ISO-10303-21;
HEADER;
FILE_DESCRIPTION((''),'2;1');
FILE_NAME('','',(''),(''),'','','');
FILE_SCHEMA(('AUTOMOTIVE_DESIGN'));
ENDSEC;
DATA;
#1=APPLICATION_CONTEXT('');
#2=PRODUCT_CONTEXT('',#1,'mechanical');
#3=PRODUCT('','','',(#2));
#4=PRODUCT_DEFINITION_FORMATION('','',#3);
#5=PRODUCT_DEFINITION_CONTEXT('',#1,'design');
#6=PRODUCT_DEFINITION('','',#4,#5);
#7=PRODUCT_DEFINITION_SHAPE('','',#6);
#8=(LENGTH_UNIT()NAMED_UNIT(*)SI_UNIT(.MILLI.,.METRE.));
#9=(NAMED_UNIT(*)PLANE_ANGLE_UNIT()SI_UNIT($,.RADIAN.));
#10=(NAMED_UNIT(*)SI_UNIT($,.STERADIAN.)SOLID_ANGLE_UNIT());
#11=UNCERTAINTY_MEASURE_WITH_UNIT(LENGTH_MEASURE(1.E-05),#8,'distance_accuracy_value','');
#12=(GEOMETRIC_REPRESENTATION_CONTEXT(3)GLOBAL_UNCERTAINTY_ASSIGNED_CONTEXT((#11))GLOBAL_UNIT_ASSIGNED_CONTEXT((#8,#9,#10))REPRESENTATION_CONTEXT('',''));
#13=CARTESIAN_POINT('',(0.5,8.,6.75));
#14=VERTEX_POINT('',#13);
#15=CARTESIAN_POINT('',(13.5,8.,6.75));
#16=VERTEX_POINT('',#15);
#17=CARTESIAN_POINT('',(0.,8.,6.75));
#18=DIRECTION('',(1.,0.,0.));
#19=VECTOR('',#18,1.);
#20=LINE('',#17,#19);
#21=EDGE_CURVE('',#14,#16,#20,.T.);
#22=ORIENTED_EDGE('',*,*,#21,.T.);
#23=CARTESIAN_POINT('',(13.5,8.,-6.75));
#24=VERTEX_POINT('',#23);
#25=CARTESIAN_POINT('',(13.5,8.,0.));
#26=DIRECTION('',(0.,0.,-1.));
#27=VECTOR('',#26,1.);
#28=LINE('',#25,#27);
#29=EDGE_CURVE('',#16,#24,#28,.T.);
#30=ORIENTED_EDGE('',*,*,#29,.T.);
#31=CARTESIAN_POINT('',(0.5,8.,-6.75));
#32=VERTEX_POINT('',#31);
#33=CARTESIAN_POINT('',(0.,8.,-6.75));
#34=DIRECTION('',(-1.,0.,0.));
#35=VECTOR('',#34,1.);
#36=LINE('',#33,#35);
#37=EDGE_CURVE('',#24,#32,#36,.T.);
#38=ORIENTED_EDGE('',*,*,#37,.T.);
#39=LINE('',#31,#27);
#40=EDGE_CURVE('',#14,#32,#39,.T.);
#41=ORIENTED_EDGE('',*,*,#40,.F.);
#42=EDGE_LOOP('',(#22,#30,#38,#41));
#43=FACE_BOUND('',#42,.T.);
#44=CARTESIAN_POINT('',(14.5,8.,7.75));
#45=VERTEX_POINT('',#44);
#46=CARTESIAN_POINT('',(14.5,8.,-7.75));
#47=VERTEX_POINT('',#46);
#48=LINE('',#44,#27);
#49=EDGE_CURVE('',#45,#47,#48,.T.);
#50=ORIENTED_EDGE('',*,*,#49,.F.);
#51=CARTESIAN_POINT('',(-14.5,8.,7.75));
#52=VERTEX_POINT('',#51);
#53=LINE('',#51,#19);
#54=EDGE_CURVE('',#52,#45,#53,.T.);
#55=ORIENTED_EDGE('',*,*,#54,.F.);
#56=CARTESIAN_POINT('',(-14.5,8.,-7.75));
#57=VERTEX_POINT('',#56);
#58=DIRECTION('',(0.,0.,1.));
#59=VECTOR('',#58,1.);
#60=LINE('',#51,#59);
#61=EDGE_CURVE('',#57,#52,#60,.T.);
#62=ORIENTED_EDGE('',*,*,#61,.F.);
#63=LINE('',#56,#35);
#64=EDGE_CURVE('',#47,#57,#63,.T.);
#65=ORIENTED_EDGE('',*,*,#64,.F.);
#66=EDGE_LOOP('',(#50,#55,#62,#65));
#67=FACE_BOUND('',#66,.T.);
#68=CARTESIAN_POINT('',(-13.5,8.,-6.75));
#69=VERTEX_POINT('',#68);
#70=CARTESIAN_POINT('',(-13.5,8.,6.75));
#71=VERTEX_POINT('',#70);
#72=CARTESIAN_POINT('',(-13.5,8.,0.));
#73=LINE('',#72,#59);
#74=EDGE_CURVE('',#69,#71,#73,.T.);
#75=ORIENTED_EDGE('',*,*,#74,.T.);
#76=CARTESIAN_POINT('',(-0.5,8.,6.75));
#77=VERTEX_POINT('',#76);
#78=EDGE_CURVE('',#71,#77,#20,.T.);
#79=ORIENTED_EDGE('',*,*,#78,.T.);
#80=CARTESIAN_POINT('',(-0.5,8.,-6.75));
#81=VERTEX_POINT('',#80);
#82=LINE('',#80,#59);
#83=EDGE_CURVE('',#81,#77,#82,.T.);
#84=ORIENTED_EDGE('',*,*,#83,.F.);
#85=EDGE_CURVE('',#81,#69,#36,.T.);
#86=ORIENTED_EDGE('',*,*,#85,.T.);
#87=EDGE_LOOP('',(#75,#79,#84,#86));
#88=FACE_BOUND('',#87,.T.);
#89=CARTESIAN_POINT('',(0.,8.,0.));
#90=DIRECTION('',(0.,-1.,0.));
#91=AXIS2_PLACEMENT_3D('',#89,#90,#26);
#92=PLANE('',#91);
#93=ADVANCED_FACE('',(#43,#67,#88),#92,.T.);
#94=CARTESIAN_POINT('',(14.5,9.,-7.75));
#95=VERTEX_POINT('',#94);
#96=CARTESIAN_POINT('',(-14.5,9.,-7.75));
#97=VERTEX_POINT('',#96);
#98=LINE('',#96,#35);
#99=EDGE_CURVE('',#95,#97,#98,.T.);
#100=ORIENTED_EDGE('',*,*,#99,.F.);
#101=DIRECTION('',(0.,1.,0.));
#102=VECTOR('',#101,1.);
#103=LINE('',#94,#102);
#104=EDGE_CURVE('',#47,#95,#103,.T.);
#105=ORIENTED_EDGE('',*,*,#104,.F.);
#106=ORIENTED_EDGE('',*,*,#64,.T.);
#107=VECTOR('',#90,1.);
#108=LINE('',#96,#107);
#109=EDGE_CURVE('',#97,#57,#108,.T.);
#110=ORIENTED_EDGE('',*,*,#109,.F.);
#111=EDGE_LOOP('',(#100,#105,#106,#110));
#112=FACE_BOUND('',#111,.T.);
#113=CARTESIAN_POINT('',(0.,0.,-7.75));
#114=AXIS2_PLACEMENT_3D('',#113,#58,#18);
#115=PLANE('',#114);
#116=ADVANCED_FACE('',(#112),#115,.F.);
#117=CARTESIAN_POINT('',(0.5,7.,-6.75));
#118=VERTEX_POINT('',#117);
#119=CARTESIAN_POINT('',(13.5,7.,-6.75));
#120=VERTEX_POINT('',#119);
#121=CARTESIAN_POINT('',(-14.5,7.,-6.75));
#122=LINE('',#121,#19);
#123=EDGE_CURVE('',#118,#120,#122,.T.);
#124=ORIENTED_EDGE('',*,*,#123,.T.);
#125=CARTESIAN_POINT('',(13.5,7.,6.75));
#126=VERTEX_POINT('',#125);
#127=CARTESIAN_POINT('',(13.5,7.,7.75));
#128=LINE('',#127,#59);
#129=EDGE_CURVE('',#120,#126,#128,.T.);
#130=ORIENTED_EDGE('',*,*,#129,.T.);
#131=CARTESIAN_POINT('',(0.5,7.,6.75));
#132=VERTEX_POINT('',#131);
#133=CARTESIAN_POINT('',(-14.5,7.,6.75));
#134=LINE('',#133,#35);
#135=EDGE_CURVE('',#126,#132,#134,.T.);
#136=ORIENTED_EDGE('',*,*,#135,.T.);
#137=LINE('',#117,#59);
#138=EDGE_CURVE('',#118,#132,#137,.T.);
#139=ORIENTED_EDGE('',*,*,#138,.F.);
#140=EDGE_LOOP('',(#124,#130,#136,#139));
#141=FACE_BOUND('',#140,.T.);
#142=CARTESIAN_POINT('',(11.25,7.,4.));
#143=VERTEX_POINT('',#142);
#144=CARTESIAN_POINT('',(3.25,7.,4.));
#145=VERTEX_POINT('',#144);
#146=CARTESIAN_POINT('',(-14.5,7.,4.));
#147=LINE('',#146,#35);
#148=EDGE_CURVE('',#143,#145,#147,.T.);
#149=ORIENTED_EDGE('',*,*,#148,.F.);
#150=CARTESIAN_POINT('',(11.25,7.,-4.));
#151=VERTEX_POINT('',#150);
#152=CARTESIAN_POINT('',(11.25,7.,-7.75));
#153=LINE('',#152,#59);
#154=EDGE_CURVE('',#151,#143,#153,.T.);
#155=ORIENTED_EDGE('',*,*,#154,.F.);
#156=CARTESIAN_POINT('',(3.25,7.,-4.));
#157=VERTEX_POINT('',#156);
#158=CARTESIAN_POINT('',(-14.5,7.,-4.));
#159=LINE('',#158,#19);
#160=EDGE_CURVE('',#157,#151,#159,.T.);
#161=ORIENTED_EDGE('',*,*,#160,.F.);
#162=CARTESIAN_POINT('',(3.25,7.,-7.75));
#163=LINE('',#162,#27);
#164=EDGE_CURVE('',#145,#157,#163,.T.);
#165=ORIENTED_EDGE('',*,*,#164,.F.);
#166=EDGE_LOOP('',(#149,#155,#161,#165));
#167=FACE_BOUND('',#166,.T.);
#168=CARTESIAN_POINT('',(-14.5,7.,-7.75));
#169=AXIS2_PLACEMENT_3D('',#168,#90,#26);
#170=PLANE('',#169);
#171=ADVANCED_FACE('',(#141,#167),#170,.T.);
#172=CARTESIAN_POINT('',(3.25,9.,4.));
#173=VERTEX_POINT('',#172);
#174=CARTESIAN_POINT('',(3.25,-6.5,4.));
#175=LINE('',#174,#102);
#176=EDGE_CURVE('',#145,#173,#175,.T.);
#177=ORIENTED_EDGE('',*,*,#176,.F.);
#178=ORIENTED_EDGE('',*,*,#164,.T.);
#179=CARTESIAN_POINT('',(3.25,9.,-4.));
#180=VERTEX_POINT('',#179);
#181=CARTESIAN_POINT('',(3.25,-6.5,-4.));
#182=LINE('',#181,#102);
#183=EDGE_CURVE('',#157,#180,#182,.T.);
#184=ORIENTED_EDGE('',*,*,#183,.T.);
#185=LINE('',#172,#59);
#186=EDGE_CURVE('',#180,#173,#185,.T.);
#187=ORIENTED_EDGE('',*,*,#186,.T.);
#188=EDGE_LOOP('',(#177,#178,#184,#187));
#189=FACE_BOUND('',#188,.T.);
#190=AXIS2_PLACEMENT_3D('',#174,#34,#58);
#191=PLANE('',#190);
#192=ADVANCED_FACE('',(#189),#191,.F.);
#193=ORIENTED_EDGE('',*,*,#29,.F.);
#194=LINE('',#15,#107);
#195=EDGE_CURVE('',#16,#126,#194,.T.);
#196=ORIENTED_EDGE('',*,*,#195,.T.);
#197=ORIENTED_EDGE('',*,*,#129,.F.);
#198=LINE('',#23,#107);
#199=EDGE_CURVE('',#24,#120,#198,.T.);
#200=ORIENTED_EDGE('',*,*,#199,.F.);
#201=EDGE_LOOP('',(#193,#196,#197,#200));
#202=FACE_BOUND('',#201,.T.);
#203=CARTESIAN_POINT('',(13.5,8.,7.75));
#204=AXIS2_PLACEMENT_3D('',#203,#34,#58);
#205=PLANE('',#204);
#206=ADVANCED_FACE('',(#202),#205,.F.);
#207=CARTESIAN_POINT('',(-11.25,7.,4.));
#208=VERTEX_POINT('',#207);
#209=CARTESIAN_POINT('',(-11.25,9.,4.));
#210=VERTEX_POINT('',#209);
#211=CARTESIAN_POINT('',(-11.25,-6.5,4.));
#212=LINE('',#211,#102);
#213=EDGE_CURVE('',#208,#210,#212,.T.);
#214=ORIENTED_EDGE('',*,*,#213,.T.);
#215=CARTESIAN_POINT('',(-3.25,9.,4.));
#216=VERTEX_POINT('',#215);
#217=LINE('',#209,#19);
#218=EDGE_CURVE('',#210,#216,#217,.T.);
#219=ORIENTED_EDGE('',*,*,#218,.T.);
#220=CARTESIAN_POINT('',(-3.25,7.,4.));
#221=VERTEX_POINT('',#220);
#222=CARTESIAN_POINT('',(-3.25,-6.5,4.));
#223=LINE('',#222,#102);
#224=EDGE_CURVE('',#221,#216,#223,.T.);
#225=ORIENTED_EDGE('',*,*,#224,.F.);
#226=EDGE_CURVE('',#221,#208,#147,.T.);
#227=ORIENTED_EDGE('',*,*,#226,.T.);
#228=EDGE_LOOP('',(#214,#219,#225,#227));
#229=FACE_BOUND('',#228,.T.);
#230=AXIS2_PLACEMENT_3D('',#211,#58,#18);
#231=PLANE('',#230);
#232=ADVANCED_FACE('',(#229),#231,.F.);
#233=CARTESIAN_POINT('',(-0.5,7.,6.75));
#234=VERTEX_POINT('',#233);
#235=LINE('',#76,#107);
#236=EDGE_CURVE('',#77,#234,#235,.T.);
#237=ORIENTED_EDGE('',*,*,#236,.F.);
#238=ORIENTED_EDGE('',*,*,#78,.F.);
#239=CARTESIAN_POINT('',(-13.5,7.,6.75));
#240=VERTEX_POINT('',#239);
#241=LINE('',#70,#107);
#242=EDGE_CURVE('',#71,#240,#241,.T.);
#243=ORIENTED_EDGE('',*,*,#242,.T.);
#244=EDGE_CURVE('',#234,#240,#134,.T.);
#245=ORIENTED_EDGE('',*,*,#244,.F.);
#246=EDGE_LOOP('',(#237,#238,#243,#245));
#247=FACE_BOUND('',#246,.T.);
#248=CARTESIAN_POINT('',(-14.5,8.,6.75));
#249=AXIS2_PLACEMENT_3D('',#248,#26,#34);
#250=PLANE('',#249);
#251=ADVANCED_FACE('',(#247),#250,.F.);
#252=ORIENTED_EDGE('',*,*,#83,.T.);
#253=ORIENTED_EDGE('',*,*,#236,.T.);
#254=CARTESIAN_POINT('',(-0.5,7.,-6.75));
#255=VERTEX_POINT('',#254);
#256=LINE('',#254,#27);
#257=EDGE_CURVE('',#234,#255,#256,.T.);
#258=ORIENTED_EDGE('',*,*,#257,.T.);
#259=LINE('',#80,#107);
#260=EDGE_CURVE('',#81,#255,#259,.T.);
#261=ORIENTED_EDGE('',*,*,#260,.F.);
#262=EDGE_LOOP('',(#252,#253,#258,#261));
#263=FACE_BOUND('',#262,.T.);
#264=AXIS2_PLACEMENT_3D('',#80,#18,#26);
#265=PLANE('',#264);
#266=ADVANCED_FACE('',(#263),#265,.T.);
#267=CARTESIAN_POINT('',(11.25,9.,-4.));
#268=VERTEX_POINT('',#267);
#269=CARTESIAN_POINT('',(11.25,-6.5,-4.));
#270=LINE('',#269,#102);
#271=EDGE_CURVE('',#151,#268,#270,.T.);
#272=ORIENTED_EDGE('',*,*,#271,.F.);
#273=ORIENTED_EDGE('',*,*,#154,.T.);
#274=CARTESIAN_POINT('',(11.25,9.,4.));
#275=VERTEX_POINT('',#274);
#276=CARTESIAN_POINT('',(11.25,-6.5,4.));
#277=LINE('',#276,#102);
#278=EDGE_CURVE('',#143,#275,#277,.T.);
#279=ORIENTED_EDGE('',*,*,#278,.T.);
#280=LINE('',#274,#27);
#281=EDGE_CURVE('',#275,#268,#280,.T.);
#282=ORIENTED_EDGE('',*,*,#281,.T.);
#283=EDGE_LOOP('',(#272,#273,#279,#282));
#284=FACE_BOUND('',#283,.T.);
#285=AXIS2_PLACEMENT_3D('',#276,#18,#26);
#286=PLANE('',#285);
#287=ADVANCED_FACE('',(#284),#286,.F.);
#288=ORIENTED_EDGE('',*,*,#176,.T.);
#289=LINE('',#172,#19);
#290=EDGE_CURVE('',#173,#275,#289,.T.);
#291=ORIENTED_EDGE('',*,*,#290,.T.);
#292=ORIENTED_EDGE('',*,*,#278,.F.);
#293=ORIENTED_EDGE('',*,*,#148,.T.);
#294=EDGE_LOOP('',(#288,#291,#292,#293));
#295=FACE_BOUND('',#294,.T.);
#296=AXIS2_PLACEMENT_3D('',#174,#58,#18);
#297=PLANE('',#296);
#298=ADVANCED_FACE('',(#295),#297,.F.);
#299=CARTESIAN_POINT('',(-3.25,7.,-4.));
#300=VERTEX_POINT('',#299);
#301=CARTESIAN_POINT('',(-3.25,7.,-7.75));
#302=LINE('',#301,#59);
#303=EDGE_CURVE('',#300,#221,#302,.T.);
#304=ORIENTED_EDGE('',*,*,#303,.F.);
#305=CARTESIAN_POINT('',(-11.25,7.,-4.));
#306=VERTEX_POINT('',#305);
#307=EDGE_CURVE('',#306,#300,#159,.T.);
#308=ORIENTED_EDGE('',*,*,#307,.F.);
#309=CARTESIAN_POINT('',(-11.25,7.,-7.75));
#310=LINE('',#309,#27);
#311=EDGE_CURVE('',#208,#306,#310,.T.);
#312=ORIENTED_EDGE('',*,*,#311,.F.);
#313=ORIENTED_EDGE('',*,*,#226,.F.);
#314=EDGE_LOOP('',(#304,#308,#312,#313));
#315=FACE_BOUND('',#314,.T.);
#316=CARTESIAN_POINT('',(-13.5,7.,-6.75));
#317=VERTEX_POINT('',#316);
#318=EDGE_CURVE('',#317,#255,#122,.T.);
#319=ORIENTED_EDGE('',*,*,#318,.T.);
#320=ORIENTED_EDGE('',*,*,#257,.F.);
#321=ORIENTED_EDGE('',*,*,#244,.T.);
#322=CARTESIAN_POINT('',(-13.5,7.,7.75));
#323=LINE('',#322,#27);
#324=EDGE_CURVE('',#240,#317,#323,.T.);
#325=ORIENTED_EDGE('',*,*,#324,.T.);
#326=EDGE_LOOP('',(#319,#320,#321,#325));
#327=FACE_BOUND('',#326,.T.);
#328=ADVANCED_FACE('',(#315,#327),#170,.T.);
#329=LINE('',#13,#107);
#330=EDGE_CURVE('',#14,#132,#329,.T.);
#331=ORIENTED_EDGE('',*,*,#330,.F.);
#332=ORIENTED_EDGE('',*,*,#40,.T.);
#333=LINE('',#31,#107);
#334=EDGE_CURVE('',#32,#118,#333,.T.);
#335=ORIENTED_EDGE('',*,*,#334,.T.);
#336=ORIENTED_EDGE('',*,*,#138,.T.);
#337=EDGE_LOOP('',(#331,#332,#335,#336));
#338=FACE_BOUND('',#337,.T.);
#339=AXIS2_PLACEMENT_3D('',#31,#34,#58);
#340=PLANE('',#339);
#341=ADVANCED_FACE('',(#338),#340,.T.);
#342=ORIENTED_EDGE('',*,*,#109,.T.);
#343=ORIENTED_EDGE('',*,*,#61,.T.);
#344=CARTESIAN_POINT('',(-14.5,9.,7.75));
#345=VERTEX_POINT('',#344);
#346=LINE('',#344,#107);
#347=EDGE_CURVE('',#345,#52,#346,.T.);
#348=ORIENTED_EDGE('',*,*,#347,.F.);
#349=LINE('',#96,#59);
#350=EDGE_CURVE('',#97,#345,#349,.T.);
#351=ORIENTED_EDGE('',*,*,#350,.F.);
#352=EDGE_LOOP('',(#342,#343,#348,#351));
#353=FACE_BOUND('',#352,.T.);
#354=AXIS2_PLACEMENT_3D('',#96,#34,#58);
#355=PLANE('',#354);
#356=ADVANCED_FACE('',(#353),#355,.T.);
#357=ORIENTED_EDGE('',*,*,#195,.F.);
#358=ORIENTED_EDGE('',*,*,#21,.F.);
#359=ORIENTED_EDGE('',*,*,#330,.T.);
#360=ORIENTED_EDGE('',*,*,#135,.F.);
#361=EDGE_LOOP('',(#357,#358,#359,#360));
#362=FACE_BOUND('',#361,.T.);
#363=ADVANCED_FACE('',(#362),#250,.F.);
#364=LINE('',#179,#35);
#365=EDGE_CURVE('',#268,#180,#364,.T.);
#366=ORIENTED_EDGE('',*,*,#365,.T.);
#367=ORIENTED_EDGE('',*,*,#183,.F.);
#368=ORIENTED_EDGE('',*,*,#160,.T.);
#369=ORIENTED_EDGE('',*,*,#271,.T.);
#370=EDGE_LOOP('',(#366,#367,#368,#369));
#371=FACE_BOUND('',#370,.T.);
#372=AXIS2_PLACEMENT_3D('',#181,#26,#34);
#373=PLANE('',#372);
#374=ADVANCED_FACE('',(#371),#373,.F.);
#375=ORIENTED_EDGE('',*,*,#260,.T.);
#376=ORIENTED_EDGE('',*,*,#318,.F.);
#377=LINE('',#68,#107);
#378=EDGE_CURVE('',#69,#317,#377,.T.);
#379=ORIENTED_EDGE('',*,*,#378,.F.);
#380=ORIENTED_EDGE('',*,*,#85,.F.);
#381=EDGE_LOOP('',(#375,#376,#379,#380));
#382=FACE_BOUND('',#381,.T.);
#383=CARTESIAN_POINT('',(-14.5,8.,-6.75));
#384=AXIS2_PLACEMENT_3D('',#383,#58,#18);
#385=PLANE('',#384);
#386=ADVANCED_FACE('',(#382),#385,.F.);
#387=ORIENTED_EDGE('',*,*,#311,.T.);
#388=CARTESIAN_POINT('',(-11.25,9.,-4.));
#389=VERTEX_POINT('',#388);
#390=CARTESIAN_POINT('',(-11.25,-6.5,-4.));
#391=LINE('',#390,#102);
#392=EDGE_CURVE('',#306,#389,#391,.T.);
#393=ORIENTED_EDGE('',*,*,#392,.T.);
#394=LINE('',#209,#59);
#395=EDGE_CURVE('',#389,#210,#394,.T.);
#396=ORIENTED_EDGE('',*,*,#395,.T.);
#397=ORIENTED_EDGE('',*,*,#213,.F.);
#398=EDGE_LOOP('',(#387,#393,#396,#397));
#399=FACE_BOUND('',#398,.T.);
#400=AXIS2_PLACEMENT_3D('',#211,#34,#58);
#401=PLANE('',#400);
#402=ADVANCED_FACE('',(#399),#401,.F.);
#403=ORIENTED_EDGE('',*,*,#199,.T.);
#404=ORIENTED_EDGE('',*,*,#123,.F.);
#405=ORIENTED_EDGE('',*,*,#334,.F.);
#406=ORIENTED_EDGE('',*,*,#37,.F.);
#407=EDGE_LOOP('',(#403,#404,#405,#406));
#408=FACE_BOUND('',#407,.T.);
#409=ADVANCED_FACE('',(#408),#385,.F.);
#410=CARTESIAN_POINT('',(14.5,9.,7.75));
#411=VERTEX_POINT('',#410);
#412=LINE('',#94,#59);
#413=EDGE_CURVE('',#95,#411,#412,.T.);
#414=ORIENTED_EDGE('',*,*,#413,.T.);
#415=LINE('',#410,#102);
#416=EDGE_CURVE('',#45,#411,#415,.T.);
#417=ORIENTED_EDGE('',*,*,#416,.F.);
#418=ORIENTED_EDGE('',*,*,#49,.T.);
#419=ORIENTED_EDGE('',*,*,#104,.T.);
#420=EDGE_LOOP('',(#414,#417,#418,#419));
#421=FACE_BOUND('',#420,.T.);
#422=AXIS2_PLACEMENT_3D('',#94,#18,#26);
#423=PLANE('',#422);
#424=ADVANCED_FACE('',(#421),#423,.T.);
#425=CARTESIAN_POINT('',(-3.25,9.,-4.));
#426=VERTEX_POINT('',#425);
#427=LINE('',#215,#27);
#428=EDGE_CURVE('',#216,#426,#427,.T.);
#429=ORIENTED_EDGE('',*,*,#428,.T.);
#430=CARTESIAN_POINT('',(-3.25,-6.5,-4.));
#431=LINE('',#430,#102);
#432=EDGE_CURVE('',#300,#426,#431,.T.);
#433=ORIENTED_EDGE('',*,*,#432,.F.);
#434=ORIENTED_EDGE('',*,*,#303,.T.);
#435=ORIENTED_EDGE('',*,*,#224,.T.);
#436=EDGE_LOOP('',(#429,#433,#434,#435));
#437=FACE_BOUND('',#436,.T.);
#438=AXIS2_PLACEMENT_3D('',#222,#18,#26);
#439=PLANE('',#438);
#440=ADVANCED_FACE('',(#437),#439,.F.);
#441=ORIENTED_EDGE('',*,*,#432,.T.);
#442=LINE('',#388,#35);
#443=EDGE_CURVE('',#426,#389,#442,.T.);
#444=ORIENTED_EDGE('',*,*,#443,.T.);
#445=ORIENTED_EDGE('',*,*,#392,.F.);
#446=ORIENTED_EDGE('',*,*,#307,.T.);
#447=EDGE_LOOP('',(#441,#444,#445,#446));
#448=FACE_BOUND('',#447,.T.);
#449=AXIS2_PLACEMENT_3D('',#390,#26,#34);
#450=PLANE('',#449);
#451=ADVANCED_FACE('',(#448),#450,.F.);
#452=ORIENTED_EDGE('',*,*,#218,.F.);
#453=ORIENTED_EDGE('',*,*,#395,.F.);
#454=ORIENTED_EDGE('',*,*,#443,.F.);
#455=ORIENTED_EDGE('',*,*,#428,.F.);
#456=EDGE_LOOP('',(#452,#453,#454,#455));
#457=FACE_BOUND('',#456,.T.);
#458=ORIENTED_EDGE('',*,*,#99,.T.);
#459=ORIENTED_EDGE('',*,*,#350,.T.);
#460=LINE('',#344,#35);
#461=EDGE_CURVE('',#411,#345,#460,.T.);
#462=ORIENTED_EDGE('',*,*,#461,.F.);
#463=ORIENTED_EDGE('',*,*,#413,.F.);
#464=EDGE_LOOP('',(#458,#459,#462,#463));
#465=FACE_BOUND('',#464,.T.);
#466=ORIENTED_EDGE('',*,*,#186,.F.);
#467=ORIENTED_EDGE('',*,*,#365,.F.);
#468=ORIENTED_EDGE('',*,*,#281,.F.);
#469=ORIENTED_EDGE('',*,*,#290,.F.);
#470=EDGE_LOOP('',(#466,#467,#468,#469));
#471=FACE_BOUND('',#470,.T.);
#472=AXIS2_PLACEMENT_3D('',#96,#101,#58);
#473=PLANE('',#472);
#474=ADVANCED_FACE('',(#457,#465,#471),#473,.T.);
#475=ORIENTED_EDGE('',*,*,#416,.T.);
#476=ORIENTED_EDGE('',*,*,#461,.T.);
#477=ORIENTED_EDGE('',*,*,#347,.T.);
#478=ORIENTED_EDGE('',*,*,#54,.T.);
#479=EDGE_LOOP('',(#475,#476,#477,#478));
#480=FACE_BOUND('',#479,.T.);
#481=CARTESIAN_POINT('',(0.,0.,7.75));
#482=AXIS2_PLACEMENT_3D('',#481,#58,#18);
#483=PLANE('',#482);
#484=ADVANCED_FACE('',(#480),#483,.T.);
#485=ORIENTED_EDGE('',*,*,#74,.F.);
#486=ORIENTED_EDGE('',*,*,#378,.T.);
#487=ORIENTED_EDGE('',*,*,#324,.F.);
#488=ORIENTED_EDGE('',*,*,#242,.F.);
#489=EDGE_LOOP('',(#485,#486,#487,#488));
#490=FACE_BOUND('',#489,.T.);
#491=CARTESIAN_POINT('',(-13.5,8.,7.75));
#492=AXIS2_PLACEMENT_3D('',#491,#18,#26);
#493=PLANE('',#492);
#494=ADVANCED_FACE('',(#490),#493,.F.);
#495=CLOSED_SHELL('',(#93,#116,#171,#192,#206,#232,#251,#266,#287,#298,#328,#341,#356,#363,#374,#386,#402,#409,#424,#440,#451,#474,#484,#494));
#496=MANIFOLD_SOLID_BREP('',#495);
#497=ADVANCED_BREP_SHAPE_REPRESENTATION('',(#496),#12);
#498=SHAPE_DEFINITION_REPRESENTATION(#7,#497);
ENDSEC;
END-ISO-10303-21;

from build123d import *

# Parameters (mm, degrees)
SKETCH1_W                = 29
SKETCH1_H                = 15.5
BOSS_EXTRUDE1_DEPTH      = 8
SHELL1_T                 = -1
SKETCH2_W                = 1
SKETCH2_H                = 13.5
BOSS_EXTRUDE2_DEPTH      = 7
SKETCH3_W                = 8
SKETCH3_H                = 3
CUT_EXTRUDE1_DEPTH       = 7
SKETCH4_W                = 29
SKETCH4_H                = 2
BOSS_EXTRUDE3_DEPTH      = 15.5
INTERSECT1_OUTLINE_W     = 29
INTERSECT1_OUTLINE_H     = 15.5
INTERSECT1_OUTLINE_W_2   = 8
INTERSECT1_OUTLINE_H_2   = 3
INTERSECT1_DEPTH         = 7
INTERSECT1_START         = 7
INTERSECT1_2_OUTLINE_W   = 29
INTERSECT1_2_OUTLINE_H   = 15.5
INTERSECT1_2_OUTLINE_W_2 = 13
INTERSECT1_2_OUTLINE_H_2 = 13.5
INTERSECT1_2_DEPTH       = 1
SKETCH5_W                = 8
SKETCH5_H                = 8
CUT_EXTRUDE2_DEPTH       = 15.5


# Read off the part's stored shape, not the designer's step: Intersect1
with BuildPart() as part:
    # Sketch1 → Boss-Extrude1 (new body)
    with BuildSketch(Plane(origin=(0, 0, 0), x_dir=(1, 0, 0), z_dir=(0, 1, 0))):
        Rectangle(SKETCH1_W, SKETCH1_H)
    extrude(amount=BOSS_EXTRUDE1_DEPTH)

    # Shell1
    shell1_openings = [part.faces().sort_by_distance(p)[0] for p in [
        (0, 8, 0),
    ]]
    offset(amount=SHELL1_T, openings=shell1_openings, kind=Kind.INTERSECTION)

    # Sketch2 → Boss-Extrude2 (add)
    with BuildSketch(Plane(origin=(0, 1, 0), x_dir=(1, 0, 0), z_dir=(0, 1, 0))):
        Rectangle(SKETCH2_W, SKETCH2_H)
    extrude(amount=BOSS_EXTRUDE2_DEPTH)

    # Sketch3 → Cut-Extrude1 (cut)
    with BuildSketch(Plane(origin=(0, 1, 0), x_dir=(1, 0, 0), z_dir=(0, 1, 0))):
        with Locations((-7.25, 5.25)):
            Rectangle(SKETCH3_W, SKETCH3_H)
        with Locations((7.25, 5.25)):
            Rectangle(SKETCH3_W, SKETCH3_H)
        with Locations((7.25, -5.25)):
            Rectangle(SKETCH3_W, SKETCH3_H)
        with Locations((-7.25, -5.25)):
            Rectangle(SKETCH3_W, SKETCH3_H)
    extrude(amount=-CUT_EXTRUDE1_DEPTH, mode=Mode.SUBTRACT)

    # Intersect1 outline → Intersect1 (cut)
    with BuildSketch(Plane(origin=(0, 0, 0), x_dir=(1, 0, 0), z_dir=(0, 1, 0))):
        Rectangle(INTERSECT1_OUTLINE_W, INTERSECT1_OUTLINE_H)
        with Locations((-7.25, -5.25)):
            Rectangle(INTERSECT1_OUTLINE_W_2, INTERSECT1_OUTLINE_H_2, mode=Mode.SUBTRACT)
        with Locations((-7.25, 5.25)):
            Rectangle(INTERSECT1_OUTLINE_W_2, INTERSECT1_OUTLINE_H_2, mode=Mode.SUBTRACT)
        with Locations((7.25, 5.25)):
            Rectangle(INTERSECT1_OUTLINE_W_2, INTERSECT1_OUTLINE_H_2, mode=Mode.SUBTRACT)
        with Locations((7.25, -5.25)):
            Rectangle(INTERSECT1_OUTLINE_W_2, INTERSECT1_OUTLINE_H_2, mode=Mode.SUBTRACT)
    extrude(amount=INTERSECT1_DEPTH, mode=Mode.SUBTRACT)


with BuildPart() as body_2:
    # Sketch4 → Boss-Extrude3 (new body)
    with BuildSketch(Plane.XY.offset(7.75)):
        with Locations((0, 8)):
            Rectangle(SKETCH4_W, SKETCH4_H)
    extrude(amount=-BOSS_EXTRUDE3_DEPTH)


with BuildPart() as intersect1_2_tool:
    # Intersect1 2 outline → Intersect1 2 (new body)
    with BuildSketch(Plane(origin=(0, 0, 0), x_dir=(1, 0, 0), z_dir=(0, 1, 0)).offset(INTERSECT1_START)):
        Rectangle(INTERSECT1_2_OUTLINE_W, INTERSECT1_2_OUTLINE_H)
        with Locations((-7, 0)):
            Rectangle(INTERSECT1_2_OUTLINE_W_2, INTERSECT1_2_OUTLINE_H_2, mode=Mode.SUBTRACT)
        with Locations((7, 0)):
            Rectangle(INTERSECT1_2_OUTLINE_W_2, INTERSECT1_2_OUTLINE_H_2, mode=Mode.SUBTRACT)
    extrude(amount=INTERSECT1_2_DEPTH)


with BuildPart() as part_1:
    add(part.part)

    # Intersect1 2: cut by intersect1_2_tool
    add(intersect1_2_tool.part, mode=Mode.SUBTRACT)


with BuildPart() as body_2_1:
    add(body_2.part)

    # Intersect1 2: cut by intersect1_2_tool
    add(intersect1_2_tool.part, mode=Mode.SUBTRACT)

    # Sketch5 → Cut-Extrude2 (cut)
    with BuildSketch(Plane(origin=(0, 9, 0), x_dir=(1, 0, 0), z_dir=(0, 1, 0))):
        with Locations((-7.25, 0)):
            Rectangle(SKETCH5_W, SKETCH5_H)
        with Locations((7.25, 0)):
            Rectangle(SKETCH5_W, SKETCH5_H)
    extrude(amount=-CUT_EXTRUDE2_DEPTH, mode=Mode.SUBTRACT)


solid = body_2_1.part
